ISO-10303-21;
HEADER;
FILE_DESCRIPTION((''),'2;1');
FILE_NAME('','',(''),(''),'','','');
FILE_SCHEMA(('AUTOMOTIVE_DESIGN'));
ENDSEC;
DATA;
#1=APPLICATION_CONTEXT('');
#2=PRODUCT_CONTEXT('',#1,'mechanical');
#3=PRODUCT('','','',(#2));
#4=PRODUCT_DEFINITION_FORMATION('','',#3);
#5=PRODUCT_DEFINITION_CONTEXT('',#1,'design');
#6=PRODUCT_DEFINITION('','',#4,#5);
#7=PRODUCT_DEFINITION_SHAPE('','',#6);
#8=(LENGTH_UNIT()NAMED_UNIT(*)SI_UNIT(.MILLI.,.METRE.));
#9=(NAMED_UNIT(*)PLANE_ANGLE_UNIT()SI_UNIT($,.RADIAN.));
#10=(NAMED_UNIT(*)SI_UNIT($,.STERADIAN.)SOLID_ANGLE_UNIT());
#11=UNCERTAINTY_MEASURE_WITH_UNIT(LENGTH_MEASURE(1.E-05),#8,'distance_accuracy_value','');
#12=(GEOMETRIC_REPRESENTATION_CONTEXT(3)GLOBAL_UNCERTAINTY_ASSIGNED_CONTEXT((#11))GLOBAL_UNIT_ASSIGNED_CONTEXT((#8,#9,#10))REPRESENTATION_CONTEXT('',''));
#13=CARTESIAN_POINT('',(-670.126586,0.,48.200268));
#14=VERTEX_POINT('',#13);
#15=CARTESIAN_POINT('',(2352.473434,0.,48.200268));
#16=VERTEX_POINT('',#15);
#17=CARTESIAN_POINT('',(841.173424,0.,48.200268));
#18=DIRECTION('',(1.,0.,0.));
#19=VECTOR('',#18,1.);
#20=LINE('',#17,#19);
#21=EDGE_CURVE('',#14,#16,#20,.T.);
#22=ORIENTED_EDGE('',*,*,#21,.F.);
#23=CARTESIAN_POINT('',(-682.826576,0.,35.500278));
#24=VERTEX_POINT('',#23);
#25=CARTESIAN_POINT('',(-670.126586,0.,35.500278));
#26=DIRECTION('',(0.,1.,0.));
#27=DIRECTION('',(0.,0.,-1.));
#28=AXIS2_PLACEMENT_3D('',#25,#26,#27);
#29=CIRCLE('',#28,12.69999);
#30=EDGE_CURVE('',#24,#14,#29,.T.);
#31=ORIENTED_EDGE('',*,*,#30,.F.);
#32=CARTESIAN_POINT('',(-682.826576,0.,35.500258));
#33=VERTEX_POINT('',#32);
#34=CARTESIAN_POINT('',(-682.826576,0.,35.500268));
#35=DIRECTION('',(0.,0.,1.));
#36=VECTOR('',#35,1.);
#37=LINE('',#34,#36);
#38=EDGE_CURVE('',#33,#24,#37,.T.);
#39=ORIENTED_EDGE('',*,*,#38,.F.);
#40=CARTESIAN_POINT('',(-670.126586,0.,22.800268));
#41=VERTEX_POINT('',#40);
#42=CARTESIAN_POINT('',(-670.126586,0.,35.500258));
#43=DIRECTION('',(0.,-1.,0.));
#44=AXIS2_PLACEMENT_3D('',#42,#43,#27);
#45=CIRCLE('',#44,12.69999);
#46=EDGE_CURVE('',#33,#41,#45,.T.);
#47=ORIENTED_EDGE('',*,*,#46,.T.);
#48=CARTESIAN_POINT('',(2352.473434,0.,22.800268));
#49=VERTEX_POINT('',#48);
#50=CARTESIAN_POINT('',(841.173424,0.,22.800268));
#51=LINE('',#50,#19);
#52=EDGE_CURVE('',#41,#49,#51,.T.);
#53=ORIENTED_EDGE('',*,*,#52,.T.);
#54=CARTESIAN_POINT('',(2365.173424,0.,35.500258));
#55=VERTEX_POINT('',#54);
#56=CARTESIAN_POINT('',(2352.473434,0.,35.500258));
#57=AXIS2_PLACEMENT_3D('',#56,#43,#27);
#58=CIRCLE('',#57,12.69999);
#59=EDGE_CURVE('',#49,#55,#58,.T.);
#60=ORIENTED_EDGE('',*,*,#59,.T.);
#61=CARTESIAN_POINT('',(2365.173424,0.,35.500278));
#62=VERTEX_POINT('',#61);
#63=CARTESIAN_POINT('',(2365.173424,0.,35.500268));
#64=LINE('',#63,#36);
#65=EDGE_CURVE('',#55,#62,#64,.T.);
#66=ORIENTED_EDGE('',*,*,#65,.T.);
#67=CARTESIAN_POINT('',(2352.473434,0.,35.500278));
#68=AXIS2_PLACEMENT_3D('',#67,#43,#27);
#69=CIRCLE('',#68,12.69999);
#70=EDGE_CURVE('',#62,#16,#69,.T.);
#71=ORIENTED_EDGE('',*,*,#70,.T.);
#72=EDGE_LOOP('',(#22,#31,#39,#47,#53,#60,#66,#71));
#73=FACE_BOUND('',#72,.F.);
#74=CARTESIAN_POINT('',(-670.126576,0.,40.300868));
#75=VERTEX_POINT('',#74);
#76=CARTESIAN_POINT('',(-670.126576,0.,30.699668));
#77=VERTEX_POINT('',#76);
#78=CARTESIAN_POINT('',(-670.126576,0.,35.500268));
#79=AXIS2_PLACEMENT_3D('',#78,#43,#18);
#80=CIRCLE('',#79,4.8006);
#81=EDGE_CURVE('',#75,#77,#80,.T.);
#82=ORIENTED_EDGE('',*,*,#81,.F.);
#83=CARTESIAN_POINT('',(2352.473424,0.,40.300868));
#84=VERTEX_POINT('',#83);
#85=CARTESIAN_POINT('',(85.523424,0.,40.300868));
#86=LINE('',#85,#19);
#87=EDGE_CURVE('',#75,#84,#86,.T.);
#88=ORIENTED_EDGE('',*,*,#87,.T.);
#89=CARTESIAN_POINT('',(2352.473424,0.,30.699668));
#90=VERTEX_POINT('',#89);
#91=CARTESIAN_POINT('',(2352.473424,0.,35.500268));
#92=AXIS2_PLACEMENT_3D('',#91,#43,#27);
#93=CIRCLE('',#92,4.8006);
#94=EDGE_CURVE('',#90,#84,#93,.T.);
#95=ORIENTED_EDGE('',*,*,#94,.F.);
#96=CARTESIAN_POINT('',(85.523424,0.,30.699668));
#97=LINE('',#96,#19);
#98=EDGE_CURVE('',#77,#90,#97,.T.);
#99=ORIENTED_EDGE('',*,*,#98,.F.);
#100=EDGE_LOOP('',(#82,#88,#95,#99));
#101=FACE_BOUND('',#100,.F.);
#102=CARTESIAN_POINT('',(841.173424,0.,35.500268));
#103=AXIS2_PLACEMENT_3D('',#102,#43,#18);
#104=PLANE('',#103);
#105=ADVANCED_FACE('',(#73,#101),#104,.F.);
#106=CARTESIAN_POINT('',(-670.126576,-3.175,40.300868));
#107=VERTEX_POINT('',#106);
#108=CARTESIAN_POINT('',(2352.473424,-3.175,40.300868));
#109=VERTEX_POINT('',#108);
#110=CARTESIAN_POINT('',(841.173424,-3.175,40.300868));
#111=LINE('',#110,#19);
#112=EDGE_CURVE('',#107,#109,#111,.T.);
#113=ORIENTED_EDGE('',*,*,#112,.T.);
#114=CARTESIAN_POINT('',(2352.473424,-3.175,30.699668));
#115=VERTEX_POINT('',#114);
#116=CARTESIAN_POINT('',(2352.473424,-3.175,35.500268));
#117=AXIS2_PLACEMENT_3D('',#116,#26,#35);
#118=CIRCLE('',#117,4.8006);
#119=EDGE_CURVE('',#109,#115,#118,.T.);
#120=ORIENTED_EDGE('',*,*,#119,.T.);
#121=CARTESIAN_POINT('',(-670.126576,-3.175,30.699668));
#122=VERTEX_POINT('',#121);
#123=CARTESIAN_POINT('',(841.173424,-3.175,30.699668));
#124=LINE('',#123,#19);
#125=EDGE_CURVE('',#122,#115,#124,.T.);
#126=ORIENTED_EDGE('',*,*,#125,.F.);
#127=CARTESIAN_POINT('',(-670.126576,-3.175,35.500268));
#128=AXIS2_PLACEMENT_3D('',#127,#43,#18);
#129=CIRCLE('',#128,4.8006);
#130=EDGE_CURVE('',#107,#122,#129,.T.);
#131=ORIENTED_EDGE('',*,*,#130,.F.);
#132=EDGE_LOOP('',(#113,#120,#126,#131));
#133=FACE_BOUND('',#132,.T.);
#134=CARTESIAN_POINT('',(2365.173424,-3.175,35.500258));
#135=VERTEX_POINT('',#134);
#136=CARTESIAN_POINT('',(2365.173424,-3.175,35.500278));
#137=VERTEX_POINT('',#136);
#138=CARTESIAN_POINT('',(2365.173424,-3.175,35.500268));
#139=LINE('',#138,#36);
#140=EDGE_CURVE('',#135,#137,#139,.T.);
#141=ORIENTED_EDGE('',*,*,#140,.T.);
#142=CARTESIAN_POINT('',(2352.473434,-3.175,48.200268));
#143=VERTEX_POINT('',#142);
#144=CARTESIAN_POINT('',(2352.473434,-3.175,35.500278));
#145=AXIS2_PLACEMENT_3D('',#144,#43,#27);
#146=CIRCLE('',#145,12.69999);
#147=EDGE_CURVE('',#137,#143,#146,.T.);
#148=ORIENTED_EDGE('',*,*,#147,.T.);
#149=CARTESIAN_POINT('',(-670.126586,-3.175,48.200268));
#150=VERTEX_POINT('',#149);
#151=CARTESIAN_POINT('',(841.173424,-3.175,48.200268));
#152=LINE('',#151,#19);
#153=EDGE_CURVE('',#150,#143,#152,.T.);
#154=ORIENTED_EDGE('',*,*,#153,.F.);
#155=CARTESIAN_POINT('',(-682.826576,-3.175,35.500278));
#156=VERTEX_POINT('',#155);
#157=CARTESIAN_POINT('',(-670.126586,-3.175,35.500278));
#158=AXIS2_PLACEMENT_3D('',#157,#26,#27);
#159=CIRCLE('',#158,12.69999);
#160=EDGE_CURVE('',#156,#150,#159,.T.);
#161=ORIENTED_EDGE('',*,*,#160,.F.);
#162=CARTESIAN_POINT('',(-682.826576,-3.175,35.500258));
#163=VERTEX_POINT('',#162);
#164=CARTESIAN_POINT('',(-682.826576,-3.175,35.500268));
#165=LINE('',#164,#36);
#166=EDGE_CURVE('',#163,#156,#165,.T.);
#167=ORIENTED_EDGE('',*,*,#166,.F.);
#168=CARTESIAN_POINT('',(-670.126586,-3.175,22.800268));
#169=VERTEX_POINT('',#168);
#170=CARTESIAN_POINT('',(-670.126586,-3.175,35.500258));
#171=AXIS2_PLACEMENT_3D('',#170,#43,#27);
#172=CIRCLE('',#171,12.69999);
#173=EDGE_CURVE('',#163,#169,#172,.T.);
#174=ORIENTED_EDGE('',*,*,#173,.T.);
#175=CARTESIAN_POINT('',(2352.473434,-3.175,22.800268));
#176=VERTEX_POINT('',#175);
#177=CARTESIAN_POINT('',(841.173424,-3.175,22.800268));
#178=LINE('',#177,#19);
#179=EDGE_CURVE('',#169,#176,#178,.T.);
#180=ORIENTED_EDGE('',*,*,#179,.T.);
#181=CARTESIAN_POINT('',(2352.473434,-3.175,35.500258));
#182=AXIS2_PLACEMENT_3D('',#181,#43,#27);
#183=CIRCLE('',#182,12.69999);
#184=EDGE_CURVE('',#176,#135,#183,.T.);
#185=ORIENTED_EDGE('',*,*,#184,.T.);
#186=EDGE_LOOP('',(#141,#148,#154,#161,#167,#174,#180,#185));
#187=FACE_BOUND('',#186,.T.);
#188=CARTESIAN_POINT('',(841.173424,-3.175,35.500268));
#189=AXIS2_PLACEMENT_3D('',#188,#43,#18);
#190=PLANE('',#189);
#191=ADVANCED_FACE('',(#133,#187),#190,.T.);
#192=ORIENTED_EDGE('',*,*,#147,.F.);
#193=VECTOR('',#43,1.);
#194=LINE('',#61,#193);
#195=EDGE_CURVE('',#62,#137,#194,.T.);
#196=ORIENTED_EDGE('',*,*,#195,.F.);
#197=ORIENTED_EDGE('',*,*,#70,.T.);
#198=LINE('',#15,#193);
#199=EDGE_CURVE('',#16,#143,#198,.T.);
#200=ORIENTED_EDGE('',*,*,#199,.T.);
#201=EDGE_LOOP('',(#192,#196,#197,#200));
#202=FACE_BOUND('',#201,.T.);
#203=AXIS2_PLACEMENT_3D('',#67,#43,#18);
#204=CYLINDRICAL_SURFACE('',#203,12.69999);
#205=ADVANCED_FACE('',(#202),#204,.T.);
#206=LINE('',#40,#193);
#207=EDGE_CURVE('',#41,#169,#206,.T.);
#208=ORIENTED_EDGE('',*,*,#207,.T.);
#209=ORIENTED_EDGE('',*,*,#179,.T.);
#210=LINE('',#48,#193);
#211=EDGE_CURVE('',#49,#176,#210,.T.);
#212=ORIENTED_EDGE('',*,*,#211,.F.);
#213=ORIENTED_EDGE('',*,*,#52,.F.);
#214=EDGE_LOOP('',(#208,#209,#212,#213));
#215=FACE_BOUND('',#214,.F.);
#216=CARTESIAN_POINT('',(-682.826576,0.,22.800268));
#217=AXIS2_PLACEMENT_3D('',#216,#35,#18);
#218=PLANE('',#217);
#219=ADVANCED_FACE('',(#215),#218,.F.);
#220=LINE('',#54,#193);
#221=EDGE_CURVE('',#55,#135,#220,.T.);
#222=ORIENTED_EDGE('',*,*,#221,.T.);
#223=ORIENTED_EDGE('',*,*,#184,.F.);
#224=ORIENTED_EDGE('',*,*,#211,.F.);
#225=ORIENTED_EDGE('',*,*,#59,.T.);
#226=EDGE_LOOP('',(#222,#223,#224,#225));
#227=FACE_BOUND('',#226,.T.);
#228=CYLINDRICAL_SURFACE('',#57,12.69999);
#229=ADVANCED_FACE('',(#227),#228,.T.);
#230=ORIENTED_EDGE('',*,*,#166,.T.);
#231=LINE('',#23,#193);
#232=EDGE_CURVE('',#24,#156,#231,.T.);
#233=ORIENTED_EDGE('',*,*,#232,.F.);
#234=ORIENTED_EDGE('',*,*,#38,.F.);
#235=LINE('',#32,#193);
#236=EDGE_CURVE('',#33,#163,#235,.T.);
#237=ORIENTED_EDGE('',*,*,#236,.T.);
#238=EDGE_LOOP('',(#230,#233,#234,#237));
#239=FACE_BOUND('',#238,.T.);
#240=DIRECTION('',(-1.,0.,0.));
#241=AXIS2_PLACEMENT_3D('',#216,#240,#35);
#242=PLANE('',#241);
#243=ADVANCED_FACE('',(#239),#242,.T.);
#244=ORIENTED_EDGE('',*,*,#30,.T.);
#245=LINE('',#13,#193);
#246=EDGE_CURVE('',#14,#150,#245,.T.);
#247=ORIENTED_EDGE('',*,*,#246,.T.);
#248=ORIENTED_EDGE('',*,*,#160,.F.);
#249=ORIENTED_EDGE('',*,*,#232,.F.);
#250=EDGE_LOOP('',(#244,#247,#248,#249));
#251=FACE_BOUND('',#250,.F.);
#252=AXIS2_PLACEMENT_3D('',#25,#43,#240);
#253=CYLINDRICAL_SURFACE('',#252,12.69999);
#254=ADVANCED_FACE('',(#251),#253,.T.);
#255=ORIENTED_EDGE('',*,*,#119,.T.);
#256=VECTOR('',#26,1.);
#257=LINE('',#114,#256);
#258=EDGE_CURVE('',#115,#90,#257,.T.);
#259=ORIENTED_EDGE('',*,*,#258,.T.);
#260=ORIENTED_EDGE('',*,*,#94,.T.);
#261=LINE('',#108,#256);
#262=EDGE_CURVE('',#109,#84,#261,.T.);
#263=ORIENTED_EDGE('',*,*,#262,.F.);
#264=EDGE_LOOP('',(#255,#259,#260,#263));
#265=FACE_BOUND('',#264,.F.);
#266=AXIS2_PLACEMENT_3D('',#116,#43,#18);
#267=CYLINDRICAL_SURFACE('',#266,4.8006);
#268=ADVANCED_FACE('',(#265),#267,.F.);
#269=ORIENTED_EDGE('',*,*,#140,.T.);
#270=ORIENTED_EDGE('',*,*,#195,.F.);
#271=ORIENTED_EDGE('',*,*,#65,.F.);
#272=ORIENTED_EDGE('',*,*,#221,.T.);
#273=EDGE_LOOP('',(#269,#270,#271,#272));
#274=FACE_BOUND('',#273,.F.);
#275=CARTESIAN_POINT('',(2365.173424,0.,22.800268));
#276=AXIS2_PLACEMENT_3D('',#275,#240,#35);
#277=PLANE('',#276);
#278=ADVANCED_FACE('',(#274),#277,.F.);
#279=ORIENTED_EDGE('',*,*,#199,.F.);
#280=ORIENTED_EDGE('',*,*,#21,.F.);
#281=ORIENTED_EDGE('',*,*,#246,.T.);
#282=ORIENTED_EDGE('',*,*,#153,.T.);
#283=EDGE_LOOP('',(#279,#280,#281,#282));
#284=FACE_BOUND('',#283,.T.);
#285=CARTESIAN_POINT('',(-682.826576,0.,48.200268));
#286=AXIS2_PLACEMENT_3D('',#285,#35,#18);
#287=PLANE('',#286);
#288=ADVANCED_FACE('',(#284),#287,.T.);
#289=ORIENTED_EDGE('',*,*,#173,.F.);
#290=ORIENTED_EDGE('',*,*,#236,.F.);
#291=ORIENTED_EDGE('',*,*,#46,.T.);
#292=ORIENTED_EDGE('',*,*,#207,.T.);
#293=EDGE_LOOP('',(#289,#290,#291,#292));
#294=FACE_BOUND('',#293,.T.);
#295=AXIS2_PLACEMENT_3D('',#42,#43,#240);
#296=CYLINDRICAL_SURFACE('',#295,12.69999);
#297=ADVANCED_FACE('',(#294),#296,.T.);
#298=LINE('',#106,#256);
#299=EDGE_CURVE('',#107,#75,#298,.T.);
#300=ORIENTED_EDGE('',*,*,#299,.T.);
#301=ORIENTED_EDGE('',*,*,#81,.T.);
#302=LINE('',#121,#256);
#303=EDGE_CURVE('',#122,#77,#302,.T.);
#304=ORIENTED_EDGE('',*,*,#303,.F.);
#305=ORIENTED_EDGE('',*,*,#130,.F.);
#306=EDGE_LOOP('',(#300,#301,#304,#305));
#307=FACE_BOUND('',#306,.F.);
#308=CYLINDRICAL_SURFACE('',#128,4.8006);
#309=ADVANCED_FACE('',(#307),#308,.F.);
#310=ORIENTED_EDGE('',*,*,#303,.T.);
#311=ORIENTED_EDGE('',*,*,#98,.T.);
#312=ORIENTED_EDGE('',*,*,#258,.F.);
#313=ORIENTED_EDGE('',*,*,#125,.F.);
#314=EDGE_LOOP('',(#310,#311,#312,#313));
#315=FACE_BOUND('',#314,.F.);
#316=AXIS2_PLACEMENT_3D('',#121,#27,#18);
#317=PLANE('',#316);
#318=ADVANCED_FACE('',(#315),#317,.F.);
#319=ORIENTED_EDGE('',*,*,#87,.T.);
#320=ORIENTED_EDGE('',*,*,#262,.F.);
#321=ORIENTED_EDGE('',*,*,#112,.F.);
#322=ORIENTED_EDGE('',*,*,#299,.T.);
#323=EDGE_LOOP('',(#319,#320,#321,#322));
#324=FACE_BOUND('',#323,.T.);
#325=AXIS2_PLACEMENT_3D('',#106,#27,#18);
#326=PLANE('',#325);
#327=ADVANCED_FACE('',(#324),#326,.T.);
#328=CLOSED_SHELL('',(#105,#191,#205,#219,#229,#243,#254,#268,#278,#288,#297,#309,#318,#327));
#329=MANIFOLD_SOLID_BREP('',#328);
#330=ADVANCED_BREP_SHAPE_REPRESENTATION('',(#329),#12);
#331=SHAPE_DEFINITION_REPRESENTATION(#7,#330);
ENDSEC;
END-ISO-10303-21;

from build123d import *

# Parameters (mm, degrees)
F0_W     = 3048
F0_H     = 25.4
F1_DEPTH = 3.175
F2_R     = 12.69999
F3_R     = 4.8006
F4_DEPTH = 3.175
F5_W     = 3022.6
F5_H     = 9.6012
F6_DEPTH = 25.4


# Not quite as in the source:
# - a fillet or chamfer is up to 0.001 mm smaller than in the source, because OpenCascade refuses the exact size


with BuildPart() as f1:
    # F0 (on Front) → F1 (new body)
    with BuildSketch(Plane.XZ):
        with Locations((841.1734242707, 35.5002675663)):
            Rectangle(F0_W, F0_H)
    extrude(amount=F1_DEPTH)

    # F2 (radius 12.7 in the source; OpenCascade refuses exactly that, so slightly less here)
    f2_edges = [f1.edges().sort_by_distance(p)[0] for p in [
        (2365.173424, -1.5875, 48.200268),
        (2365.173424, -1.5875, 22.800268),
        (-682.826576, -1.5875, 48.200268),
        (-682.826576, -1.5875, 22.800268),
    ]]
    fillet(f2_edges, radius=F2_R)

    # F3 (on face) → F4 (cut)
    with BuildSketch(Plane.XZ.offset(3.175)):
        with Locations((-670.1265757293, 35.5002675663)):
            Circle(F3_R)
        with Locations((2352.4734242707, 35.5002675663)):
            Circle(F3_R)
    extrude(amount=-F4_DEPTH, mode=Mode.SUBTRACT)

    # F5 (on face) → F6 (cut)
    with BuildSketch(Plane.XZ.offset(3.175)):
        with Locations((841.1734242707, 35.5002675663)):
            Rectangle(F5_W, F5_H)
    extrude(amount=-F6_DEPTH, mode=Mode.SUBTRACT)


solid = f1.part
